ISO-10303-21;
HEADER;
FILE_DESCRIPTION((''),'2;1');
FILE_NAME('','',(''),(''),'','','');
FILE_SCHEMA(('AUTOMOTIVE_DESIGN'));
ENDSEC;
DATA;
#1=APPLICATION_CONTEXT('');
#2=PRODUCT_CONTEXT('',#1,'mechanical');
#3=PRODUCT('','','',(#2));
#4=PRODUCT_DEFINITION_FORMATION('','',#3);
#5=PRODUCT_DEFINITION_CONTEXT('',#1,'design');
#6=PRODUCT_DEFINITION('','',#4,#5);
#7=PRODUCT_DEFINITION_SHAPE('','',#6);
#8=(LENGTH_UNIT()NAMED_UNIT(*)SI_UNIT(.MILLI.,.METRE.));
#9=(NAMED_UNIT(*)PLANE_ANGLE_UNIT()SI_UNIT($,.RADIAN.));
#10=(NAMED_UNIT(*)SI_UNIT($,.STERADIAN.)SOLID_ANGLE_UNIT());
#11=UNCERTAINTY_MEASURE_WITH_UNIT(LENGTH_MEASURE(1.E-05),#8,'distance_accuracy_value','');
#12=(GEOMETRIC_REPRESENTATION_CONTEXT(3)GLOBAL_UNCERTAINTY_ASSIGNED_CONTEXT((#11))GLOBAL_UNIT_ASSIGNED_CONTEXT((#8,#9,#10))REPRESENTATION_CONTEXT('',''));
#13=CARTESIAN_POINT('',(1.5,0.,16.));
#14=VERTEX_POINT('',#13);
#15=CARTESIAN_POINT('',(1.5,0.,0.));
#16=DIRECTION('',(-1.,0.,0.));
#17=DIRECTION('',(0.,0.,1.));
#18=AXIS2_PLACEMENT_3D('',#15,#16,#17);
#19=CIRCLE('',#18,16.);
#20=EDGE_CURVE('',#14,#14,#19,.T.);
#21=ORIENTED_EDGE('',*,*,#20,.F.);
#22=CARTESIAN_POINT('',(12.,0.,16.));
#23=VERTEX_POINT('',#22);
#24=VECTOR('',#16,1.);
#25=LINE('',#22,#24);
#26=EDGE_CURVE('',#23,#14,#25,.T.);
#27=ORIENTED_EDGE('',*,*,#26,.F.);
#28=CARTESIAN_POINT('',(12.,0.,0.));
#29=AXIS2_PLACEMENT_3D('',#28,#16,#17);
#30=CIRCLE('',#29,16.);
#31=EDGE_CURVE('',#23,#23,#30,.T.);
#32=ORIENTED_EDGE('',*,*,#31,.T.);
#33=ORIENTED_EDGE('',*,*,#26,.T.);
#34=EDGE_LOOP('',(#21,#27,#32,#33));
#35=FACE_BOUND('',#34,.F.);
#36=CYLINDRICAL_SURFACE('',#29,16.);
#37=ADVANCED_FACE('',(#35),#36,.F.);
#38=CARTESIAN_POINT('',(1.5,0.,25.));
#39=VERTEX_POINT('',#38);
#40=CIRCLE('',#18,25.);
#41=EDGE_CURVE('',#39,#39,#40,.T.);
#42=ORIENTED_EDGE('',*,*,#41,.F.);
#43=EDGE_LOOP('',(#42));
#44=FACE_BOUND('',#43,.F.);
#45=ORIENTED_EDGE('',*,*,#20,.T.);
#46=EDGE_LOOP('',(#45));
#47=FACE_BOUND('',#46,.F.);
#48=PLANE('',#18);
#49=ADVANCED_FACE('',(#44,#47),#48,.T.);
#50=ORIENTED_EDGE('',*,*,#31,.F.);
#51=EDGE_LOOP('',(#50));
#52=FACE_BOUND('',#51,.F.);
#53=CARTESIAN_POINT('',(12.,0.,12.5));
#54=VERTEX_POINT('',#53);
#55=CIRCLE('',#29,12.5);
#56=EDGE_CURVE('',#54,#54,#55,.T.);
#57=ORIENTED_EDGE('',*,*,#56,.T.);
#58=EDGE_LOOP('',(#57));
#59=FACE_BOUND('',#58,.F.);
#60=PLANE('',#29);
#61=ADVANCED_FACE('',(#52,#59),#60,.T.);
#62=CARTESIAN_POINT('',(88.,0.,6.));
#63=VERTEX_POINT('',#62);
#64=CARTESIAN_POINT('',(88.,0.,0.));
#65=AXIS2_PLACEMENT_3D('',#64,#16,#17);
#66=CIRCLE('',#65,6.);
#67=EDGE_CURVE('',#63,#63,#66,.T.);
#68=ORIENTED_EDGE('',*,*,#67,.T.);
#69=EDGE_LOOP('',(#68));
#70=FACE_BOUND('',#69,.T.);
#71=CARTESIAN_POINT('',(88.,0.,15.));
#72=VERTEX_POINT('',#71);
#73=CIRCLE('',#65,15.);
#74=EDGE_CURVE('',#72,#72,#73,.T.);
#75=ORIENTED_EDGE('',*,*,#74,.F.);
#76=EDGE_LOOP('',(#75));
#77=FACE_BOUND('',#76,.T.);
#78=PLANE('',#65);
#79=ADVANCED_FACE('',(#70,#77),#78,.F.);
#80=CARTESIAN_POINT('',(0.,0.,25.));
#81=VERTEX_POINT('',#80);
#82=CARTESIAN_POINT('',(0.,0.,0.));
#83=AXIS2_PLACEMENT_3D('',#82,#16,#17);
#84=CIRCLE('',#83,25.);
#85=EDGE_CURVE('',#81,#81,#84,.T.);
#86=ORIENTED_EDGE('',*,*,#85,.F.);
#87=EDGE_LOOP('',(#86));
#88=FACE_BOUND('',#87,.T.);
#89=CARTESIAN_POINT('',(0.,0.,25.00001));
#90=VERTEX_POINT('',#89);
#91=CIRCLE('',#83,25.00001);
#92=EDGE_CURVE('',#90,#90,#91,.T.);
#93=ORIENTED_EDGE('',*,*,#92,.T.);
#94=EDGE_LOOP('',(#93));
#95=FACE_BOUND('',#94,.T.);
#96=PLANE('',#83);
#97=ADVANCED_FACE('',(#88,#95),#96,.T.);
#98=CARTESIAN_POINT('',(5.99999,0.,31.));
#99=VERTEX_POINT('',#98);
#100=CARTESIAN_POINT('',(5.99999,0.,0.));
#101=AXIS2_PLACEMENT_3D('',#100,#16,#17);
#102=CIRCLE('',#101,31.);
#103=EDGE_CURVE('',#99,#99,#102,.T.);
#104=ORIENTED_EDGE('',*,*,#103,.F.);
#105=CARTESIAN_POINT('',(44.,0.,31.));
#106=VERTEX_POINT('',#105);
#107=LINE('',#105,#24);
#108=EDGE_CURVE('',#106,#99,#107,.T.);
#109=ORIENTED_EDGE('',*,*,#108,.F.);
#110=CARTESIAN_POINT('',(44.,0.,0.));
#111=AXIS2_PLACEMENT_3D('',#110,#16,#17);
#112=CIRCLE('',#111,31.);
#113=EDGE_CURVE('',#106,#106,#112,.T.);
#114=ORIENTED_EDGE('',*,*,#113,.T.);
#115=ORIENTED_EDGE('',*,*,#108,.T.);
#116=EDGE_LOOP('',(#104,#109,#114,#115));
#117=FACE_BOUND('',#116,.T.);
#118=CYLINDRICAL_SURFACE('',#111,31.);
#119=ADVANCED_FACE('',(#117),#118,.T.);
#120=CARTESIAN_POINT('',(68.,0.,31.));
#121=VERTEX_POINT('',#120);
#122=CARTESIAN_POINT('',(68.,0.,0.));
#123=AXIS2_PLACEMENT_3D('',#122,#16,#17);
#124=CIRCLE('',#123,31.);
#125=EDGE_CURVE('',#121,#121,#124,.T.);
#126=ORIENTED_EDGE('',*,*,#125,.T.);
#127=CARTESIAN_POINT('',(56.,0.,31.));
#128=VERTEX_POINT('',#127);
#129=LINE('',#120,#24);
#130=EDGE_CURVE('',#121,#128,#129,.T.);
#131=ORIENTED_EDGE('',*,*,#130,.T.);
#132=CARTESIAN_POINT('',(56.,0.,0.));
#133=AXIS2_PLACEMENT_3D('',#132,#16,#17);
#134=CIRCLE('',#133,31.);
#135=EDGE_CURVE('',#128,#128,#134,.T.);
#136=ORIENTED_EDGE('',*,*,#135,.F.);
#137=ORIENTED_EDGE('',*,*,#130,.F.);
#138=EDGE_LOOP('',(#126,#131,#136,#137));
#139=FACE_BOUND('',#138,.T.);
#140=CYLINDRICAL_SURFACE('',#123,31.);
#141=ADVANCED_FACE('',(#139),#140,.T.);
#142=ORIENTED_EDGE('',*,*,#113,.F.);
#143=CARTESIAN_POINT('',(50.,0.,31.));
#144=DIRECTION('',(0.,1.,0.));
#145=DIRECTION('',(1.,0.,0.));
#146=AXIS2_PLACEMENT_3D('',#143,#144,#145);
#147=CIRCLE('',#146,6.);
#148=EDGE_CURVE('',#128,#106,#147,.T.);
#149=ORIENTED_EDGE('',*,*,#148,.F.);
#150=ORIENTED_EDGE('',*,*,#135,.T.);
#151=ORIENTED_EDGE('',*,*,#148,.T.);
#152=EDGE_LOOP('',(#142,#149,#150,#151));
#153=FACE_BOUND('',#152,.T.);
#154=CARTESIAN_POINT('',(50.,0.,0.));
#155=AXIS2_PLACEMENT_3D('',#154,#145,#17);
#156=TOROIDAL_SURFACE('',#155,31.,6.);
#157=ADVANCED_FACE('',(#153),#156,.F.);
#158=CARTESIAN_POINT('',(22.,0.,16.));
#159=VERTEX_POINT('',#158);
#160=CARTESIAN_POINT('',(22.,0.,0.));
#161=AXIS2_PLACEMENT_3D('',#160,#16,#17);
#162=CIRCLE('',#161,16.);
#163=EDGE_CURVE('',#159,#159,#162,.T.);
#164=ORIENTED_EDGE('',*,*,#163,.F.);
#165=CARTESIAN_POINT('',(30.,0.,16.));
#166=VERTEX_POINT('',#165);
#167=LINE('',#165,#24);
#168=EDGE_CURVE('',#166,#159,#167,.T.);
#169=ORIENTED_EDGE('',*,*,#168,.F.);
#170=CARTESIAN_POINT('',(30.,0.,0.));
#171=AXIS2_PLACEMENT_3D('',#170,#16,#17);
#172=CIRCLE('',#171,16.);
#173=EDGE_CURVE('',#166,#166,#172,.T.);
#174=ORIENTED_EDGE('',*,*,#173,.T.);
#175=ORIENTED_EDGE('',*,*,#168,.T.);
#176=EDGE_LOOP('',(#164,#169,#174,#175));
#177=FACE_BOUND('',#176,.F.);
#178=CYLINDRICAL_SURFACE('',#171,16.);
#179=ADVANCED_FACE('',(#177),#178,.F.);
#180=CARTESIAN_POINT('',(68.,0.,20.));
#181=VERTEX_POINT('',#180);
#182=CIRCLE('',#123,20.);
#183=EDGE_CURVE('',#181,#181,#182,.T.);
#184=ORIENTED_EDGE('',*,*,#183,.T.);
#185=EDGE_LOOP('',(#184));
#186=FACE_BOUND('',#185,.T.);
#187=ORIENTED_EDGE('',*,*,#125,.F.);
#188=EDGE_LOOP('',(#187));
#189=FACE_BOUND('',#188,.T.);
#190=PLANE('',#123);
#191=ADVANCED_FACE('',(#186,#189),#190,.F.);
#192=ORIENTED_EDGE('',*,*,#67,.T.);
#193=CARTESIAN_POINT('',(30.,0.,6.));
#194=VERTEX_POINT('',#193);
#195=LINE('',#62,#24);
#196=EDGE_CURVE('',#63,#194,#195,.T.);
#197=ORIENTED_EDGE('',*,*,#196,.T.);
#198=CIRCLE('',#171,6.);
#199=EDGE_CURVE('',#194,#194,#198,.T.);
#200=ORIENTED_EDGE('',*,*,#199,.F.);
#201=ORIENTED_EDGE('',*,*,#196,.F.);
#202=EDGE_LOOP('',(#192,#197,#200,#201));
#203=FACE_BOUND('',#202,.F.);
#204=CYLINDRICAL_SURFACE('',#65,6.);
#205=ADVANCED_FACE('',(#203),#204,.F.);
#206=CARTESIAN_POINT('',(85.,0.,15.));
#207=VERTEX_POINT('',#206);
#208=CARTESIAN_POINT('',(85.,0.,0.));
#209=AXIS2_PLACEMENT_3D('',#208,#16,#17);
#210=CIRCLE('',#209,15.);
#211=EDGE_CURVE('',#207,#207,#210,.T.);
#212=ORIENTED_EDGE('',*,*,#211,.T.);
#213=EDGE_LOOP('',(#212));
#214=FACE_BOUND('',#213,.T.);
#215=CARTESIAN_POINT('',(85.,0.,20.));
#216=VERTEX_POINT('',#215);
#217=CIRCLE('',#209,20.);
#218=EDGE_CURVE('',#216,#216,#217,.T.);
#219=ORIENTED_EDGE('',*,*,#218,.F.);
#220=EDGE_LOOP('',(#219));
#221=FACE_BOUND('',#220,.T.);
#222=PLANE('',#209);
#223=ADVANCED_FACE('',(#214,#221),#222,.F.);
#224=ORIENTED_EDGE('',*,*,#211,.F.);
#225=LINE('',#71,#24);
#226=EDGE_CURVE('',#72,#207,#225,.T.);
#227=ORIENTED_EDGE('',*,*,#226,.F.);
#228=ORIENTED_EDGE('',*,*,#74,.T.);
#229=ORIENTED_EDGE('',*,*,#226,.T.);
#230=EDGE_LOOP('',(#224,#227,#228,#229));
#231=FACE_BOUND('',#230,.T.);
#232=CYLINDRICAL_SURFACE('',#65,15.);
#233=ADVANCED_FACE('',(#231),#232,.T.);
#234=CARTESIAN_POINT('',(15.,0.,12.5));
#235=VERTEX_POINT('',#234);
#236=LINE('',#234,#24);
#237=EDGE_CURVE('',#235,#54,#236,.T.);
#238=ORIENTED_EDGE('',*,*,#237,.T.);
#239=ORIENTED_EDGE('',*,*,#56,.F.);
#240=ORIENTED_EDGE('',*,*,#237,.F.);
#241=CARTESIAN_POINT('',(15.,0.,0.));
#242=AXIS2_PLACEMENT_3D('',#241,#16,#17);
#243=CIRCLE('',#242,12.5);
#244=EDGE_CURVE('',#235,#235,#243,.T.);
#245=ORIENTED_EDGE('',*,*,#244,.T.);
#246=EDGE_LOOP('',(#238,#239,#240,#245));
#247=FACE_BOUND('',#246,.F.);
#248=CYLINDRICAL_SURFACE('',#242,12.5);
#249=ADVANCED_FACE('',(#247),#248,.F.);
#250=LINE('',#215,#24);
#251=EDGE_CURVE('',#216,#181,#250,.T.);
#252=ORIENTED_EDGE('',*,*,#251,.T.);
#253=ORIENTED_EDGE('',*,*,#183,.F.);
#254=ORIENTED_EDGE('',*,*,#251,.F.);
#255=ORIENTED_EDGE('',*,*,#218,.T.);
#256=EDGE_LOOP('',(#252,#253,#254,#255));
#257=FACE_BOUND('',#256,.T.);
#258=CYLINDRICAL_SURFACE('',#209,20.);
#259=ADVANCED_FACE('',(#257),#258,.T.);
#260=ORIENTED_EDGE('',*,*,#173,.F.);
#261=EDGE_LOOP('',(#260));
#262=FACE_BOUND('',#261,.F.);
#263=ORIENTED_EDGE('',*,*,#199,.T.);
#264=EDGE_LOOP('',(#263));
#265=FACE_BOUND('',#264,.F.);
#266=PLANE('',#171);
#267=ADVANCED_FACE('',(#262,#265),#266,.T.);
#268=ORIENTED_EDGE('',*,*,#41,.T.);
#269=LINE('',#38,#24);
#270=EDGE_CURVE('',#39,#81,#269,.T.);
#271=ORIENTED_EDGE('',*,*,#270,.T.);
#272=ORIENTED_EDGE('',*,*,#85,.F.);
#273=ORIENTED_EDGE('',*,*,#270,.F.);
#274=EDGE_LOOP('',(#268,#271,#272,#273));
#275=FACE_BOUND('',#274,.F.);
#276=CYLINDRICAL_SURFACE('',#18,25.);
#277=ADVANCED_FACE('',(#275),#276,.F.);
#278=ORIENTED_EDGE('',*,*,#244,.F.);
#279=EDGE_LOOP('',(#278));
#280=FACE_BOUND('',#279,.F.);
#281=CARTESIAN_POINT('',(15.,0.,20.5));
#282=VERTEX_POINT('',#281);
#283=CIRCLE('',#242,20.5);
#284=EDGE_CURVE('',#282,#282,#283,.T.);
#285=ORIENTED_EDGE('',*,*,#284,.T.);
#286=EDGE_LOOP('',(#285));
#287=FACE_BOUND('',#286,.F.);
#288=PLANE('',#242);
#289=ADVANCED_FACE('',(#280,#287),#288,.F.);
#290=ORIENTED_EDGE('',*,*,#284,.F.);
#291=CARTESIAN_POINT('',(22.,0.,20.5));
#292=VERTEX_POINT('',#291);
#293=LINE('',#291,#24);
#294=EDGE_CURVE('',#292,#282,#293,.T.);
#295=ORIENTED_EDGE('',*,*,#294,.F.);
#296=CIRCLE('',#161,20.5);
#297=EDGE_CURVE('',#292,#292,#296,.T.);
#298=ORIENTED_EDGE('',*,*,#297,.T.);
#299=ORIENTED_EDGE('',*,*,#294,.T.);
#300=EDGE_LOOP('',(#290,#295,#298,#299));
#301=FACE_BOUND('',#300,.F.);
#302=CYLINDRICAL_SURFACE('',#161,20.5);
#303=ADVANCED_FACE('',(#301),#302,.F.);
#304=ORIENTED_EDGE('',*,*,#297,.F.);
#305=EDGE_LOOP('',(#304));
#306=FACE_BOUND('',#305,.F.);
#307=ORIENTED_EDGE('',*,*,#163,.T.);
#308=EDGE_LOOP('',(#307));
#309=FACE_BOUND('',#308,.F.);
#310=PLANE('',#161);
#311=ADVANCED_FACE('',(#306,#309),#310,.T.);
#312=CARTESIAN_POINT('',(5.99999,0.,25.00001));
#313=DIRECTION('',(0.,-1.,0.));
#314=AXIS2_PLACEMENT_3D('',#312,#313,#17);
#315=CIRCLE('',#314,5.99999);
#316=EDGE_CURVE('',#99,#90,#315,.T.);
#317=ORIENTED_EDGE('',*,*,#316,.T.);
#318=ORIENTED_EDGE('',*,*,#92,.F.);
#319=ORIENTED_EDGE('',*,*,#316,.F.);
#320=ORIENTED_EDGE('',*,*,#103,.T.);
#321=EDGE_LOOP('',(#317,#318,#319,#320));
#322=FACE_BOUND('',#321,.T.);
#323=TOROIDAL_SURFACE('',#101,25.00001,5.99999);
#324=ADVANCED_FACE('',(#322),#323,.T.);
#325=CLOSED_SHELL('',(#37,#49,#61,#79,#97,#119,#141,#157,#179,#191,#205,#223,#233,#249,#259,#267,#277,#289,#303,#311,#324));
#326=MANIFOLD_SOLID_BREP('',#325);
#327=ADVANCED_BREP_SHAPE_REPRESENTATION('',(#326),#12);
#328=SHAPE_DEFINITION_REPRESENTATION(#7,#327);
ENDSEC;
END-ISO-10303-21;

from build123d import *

# Parameters (mm, degrees)
F4_R = 5.99999


# Not quite as in the source:
# - a fillet or chamfer is up to 0.001 mm smaller than in the source, because OpenCascade refuses the exact size


with BuildPart() as f2:
    # F1 (on Front) → F2 (revolve)
    with BuildSketch(Plane.XZ):
        with BuildLine():
            Line((44, 31), (0, 31))
            Line((0, 31), (0, 0))
            Line((0, 0), (88, 0))
            Line((88, 0), (88, 15))
            Line((88, 15), (85, 15))
            Line((85, 15), (85, 20))
            Line((85, 20), (68, 20))
            Line((68, 20), (68, 31))
            Line((68, 31), (56, 31))
            ThreePointArc((56, 31), (50, 25), (44, 31))
        make_face()
    revolve(axis=Axis((48.084679991, 0, 0), (-1, 0, 0)))

    # F0 (on Front) → F3 (revolve, cut)
    with BuildSketch(Plane.XZ):
        Polygon((0, 25), (0, 0), (88, 0), (88, 6), (30, 6), (30, 16), (22, 16), (22, 20.5), (15, 20.5), (15, 12.5), (12, 12.5), (12, 16), (1.5, 16), (1.5, 25), align=None)
    revolve(axis=Axis((-11.2478316676, 0, 0), (-1, 0, 0)), mode=Mode.SUBTRACT)

    # F4 (radius 6 in the source; OpenCascade refuses exactly that, so slightly less here)
    f4_edges = [f2.edges().sort_by_distance(p)[0] for p in [
        (0, 0, -31),
    ]]
    fillet(f4_edges, radius=F4_R)


solid = f2.part
